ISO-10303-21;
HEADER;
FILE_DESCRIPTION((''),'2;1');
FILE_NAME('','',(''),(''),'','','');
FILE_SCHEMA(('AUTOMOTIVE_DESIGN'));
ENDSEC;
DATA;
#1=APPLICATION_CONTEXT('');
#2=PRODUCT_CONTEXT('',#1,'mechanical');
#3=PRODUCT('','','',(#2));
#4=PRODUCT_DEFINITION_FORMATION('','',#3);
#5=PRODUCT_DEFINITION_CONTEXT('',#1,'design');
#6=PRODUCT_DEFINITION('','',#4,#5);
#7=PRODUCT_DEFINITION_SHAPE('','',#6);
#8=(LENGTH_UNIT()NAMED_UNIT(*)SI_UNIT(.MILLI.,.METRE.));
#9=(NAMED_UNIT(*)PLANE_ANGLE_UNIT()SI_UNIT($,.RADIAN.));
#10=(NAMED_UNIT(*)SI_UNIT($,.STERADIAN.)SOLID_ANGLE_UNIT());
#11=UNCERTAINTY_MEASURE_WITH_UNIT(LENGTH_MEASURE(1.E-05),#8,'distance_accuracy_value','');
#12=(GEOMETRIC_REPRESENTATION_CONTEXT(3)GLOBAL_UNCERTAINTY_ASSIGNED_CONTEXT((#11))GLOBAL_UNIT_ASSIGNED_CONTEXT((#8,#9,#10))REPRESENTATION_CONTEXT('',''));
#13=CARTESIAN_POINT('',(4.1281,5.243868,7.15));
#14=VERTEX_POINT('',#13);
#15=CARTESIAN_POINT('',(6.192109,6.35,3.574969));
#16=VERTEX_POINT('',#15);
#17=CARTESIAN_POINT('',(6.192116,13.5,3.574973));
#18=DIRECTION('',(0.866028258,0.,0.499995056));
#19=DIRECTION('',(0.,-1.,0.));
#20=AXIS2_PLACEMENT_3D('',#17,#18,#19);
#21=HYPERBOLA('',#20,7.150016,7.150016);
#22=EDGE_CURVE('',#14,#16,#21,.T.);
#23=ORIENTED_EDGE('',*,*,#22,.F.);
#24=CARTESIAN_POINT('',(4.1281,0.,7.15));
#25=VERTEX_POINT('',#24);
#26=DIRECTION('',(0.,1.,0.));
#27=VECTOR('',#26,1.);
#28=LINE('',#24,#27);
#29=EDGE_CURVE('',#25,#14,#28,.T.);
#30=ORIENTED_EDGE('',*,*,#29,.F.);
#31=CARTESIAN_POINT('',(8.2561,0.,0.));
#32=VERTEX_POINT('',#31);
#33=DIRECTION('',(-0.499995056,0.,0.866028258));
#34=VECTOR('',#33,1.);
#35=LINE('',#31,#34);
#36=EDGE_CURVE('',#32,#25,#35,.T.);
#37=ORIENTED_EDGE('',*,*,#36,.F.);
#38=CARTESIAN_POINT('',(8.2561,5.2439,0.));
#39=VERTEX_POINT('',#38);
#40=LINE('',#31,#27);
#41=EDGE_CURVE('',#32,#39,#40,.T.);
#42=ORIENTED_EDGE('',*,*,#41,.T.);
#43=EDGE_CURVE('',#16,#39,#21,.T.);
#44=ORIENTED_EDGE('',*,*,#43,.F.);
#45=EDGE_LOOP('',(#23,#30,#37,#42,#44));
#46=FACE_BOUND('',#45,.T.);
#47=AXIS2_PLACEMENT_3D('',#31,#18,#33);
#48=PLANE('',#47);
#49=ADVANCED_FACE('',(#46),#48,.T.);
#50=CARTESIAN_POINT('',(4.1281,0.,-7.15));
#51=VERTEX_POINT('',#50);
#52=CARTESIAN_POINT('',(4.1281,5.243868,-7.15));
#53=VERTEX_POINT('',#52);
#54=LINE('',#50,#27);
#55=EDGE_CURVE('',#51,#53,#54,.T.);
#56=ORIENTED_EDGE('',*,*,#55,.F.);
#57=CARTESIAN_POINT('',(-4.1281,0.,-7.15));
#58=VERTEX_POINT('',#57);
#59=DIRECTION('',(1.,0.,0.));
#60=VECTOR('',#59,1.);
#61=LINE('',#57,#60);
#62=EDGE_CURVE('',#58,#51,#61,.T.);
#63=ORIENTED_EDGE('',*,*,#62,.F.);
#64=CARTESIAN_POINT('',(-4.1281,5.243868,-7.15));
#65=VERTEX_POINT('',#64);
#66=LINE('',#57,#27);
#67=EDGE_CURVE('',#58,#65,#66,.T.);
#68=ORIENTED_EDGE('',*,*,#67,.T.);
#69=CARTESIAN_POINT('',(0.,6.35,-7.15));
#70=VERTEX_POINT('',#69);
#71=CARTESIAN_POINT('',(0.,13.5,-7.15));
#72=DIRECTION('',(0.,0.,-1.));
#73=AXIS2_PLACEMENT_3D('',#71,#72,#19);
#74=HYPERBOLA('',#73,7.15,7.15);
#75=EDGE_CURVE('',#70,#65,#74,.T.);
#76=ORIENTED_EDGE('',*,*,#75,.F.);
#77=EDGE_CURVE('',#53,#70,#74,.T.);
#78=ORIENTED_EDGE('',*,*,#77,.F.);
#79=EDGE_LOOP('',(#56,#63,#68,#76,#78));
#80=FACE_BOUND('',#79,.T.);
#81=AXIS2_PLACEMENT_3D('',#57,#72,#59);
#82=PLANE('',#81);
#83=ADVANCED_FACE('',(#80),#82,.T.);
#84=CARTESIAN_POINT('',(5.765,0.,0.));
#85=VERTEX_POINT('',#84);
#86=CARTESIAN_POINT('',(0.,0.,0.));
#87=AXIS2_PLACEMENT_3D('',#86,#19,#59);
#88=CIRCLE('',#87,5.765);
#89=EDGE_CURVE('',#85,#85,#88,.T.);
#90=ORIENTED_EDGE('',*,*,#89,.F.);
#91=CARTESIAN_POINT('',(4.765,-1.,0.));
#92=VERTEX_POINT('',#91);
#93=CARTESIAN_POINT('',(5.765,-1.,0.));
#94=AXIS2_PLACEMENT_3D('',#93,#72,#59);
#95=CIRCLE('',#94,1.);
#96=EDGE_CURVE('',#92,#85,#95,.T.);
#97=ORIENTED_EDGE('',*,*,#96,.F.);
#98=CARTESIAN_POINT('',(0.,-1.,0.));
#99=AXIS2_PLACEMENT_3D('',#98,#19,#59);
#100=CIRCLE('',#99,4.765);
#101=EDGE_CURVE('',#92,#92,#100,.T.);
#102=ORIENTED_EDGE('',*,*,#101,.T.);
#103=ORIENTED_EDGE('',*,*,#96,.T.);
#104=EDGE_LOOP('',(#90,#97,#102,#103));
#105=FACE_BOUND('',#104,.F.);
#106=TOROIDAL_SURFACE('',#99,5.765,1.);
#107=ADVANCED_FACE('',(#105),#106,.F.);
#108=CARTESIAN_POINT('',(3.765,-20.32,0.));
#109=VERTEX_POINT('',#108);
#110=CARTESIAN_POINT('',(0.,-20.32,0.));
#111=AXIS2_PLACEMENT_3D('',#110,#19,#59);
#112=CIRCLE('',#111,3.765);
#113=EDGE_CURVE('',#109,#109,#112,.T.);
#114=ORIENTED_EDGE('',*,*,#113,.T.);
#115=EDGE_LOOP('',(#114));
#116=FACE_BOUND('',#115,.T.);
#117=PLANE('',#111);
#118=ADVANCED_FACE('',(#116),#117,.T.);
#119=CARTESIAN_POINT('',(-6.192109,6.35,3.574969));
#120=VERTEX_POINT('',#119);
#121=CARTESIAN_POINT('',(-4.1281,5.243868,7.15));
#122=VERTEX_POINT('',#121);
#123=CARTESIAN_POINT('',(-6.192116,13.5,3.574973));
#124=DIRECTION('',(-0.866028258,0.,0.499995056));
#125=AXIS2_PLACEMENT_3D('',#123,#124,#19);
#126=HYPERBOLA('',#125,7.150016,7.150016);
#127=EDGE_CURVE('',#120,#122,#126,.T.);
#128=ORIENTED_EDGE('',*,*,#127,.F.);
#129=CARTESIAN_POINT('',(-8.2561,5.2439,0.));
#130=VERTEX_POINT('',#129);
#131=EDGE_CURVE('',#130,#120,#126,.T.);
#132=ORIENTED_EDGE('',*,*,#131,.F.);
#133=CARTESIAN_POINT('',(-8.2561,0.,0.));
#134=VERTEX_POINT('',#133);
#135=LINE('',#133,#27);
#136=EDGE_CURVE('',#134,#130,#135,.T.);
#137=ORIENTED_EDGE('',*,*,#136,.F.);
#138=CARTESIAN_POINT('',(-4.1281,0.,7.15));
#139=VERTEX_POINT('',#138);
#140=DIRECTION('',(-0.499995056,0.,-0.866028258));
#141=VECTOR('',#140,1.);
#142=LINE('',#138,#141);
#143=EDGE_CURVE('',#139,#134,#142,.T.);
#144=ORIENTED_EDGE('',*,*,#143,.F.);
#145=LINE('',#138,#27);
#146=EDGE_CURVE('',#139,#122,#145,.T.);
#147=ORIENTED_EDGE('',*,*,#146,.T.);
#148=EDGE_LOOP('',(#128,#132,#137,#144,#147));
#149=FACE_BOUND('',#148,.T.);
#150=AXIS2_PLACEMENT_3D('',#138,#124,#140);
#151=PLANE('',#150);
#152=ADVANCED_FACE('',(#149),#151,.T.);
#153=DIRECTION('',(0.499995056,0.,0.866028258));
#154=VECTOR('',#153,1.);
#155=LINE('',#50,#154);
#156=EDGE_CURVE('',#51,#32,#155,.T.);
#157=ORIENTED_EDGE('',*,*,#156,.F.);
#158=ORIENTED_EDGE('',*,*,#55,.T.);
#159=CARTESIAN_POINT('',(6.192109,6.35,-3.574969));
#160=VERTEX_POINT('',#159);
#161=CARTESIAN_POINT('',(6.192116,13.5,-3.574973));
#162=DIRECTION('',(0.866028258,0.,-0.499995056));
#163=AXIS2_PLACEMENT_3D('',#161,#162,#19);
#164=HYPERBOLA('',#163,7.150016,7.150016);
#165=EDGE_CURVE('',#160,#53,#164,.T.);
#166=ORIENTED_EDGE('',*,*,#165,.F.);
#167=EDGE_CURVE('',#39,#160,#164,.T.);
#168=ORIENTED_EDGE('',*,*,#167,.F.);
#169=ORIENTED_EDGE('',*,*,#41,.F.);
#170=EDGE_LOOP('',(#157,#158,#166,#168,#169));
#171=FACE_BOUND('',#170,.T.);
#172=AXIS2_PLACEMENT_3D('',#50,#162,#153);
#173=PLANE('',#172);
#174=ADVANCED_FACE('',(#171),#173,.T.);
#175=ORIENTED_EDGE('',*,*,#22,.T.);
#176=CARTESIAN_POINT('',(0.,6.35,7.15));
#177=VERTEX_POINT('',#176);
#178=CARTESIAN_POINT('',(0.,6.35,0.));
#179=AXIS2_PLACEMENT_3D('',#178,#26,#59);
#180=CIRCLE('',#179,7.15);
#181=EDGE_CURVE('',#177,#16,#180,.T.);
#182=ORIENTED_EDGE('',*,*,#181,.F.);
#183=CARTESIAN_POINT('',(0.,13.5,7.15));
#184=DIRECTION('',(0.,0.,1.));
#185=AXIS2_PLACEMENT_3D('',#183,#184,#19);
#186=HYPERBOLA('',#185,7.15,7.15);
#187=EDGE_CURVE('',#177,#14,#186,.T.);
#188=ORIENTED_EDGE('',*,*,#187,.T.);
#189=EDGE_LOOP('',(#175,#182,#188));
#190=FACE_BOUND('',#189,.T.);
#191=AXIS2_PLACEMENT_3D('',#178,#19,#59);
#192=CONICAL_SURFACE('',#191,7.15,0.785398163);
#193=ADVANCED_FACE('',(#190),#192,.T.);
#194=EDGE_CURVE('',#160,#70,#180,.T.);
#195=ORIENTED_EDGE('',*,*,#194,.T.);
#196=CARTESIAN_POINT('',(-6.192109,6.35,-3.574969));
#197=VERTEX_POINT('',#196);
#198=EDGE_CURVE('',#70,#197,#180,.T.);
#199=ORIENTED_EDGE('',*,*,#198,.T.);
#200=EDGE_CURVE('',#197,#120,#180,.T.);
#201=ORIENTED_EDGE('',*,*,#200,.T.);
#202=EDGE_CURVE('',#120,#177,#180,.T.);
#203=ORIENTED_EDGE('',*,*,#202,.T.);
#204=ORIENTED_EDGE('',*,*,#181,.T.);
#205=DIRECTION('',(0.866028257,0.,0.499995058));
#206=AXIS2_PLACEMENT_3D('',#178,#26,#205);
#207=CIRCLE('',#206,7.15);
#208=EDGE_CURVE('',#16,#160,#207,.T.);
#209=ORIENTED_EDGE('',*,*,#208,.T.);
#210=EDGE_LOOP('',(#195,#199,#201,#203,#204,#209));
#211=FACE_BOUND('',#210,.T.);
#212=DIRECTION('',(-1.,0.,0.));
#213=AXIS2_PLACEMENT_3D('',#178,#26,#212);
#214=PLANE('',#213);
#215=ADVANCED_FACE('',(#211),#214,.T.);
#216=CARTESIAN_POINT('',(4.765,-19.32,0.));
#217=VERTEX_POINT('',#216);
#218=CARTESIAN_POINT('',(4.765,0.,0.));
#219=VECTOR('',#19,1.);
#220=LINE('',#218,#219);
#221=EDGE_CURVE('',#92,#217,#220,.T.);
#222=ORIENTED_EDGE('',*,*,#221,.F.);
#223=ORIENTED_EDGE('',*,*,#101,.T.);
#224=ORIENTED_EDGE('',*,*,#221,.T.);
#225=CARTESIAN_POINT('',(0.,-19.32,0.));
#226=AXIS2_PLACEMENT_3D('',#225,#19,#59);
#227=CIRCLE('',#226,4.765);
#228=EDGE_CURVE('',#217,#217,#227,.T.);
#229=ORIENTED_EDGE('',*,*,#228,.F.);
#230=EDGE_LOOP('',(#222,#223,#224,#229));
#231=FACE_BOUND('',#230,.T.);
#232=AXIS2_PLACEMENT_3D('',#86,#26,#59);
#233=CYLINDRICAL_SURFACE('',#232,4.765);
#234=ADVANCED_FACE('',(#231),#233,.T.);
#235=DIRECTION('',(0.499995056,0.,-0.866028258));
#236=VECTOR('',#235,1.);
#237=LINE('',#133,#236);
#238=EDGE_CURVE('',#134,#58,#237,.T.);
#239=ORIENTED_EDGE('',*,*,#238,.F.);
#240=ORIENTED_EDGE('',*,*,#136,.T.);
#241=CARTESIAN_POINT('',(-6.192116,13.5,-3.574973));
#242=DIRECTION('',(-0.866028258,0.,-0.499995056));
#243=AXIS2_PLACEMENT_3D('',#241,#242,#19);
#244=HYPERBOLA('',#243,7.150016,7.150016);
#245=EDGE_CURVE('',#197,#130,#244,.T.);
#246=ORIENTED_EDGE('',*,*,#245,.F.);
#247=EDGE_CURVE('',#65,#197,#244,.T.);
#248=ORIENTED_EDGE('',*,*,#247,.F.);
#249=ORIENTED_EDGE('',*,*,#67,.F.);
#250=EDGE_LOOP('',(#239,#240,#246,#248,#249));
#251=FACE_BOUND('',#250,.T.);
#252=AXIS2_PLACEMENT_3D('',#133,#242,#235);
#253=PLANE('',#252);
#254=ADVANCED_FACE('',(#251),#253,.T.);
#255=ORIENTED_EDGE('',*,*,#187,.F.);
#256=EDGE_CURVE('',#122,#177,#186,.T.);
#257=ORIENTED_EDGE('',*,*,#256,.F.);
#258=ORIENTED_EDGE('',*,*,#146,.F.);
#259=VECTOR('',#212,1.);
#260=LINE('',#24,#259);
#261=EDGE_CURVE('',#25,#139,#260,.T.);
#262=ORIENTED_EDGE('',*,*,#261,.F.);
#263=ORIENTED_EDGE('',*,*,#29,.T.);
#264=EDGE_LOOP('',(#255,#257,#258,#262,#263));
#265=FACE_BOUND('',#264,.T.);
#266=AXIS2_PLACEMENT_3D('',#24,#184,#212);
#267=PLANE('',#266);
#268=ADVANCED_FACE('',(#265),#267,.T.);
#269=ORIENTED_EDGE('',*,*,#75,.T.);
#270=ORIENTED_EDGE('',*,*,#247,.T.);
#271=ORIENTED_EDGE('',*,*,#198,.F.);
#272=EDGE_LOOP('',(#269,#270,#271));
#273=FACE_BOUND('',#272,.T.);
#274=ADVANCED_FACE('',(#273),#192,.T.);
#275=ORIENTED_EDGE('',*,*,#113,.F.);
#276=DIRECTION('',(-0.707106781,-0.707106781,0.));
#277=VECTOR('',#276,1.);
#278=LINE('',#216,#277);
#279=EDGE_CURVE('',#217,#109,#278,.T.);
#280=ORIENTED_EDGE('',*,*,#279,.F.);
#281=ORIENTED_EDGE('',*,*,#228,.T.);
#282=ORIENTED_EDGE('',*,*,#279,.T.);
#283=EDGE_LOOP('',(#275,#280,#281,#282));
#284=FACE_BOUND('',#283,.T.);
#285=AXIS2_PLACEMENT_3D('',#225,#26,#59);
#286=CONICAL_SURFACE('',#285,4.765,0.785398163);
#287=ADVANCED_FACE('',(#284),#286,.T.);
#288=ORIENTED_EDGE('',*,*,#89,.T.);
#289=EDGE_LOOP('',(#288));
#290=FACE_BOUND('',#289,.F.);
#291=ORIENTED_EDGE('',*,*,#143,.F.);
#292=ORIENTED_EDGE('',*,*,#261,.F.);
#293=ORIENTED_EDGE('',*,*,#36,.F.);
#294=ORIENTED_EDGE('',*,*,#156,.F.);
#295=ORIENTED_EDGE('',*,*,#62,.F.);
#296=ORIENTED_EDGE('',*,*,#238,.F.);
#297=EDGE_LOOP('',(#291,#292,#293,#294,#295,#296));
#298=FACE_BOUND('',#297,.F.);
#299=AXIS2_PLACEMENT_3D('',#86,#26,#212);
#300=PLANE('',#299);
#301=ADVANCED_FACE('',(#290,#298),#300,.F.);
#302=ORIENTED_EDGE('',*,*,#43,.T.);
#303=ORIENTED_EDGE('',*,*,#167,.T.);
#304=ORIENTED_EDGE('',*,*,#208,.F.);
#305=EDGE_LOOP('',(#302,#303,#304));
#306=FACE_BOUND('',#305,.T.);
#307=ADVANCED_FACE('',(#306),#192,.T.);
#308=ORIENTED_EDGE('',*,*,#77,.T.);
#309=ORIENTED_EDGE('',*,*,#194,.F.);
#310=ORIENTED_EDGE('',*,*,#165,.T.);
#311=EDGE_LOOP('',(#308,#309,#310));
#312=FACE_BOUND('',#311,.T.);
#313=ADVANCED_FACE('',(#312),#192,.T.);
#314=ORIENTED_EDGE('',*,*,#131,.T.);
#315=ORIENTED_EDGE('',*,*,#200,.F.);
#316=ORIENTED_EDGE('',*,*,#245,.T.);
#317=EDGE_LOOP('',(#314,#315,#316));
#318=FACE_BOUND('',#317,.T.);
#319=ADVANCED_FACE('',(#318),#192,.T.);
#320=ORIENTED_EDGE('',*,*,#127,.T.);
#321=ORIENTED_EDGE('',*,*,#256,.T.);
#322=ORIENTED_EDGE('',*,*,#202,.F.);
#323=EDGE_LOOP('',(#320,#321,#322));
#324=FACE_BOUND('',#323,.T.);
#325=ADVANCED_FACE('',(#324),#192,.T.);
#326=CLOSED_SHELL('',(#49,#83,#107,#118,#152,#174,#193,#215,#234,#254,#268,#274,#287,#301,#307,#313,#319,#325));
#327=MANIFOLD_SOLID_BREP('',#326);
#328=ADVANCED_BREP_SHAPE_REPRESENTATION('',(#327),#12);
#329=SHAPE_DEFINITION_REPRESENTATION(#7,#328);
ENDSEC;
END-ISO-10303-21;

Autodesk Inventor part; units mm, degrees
ref_plane "YZ Plane" through (0, 0, 0) normal (1, 0, 0) x (0, 1, 0)
ref_plane "XZ Plane" through (0, 0, 0) normal (0, 1, 0) x (-1, 0, 0)
ref_plane "XY Plane" through (0, 0, 0) normal (0, 0, 1) x (1, 0, 0)
sketch "Sketch1" plane through (0, 0, 0) normal (0, 1, 0) x (-1, 0, 0)
  line L0 (8.2561, 0) -> (4.1281, -7.15)
  line L1 (4.1281, -7.15) -> (-4.1281, -7.15)
  line L2 (-4.1281, -7.15) -> (-8.2561, 0)
  line L3 (-8.2561, 0) -> (-4.1281, 7.15)
  line L4 (-4.1281, 7.15) -> (4.1281, 7.15)
  line L5 (4.1281, 7.15) -> (8.2561, 0)
  point P0 (0, 0)
  point P1 (0, 0)
  dimension "d0" = 14.3
extrude "Extrusion1" add sketch "Sketch1" along normal blind 6.35
sketch "Sketch2" plane through (0, 6.35, 0) normal (0, 1, 0) x (1, 0, 0)
  circle A0 centre (0, 0) radius 7.15
  dimension "d3" = 14.3
extrude "Extrusion2" cut sketch "Sketch2" against normal through all draft 45 keep common part
sketch "Sketch3" plane through (0, 0, 0) normal (0, -1, 0) x (1, 0, 0)
  circle A0 centre (0, 0) radius 4.765
  dimension "d6" = 9.53
extrude "Extrusion3" add sketch "Sketch3" along normal blind 20.32
chamfer "Chamfer1" distance 1 angle 45 1 edges at (-4.765, -20.32, 0)
fillet "Fillet1" radius 1 1 edges at (-4.765, 0, 0)
thread "Thread1" size "M10x1.5" class "6g" standard "ANSI Metric M Profile" length 18.32
properties part number "Bolt" material "Stainless Steel"
